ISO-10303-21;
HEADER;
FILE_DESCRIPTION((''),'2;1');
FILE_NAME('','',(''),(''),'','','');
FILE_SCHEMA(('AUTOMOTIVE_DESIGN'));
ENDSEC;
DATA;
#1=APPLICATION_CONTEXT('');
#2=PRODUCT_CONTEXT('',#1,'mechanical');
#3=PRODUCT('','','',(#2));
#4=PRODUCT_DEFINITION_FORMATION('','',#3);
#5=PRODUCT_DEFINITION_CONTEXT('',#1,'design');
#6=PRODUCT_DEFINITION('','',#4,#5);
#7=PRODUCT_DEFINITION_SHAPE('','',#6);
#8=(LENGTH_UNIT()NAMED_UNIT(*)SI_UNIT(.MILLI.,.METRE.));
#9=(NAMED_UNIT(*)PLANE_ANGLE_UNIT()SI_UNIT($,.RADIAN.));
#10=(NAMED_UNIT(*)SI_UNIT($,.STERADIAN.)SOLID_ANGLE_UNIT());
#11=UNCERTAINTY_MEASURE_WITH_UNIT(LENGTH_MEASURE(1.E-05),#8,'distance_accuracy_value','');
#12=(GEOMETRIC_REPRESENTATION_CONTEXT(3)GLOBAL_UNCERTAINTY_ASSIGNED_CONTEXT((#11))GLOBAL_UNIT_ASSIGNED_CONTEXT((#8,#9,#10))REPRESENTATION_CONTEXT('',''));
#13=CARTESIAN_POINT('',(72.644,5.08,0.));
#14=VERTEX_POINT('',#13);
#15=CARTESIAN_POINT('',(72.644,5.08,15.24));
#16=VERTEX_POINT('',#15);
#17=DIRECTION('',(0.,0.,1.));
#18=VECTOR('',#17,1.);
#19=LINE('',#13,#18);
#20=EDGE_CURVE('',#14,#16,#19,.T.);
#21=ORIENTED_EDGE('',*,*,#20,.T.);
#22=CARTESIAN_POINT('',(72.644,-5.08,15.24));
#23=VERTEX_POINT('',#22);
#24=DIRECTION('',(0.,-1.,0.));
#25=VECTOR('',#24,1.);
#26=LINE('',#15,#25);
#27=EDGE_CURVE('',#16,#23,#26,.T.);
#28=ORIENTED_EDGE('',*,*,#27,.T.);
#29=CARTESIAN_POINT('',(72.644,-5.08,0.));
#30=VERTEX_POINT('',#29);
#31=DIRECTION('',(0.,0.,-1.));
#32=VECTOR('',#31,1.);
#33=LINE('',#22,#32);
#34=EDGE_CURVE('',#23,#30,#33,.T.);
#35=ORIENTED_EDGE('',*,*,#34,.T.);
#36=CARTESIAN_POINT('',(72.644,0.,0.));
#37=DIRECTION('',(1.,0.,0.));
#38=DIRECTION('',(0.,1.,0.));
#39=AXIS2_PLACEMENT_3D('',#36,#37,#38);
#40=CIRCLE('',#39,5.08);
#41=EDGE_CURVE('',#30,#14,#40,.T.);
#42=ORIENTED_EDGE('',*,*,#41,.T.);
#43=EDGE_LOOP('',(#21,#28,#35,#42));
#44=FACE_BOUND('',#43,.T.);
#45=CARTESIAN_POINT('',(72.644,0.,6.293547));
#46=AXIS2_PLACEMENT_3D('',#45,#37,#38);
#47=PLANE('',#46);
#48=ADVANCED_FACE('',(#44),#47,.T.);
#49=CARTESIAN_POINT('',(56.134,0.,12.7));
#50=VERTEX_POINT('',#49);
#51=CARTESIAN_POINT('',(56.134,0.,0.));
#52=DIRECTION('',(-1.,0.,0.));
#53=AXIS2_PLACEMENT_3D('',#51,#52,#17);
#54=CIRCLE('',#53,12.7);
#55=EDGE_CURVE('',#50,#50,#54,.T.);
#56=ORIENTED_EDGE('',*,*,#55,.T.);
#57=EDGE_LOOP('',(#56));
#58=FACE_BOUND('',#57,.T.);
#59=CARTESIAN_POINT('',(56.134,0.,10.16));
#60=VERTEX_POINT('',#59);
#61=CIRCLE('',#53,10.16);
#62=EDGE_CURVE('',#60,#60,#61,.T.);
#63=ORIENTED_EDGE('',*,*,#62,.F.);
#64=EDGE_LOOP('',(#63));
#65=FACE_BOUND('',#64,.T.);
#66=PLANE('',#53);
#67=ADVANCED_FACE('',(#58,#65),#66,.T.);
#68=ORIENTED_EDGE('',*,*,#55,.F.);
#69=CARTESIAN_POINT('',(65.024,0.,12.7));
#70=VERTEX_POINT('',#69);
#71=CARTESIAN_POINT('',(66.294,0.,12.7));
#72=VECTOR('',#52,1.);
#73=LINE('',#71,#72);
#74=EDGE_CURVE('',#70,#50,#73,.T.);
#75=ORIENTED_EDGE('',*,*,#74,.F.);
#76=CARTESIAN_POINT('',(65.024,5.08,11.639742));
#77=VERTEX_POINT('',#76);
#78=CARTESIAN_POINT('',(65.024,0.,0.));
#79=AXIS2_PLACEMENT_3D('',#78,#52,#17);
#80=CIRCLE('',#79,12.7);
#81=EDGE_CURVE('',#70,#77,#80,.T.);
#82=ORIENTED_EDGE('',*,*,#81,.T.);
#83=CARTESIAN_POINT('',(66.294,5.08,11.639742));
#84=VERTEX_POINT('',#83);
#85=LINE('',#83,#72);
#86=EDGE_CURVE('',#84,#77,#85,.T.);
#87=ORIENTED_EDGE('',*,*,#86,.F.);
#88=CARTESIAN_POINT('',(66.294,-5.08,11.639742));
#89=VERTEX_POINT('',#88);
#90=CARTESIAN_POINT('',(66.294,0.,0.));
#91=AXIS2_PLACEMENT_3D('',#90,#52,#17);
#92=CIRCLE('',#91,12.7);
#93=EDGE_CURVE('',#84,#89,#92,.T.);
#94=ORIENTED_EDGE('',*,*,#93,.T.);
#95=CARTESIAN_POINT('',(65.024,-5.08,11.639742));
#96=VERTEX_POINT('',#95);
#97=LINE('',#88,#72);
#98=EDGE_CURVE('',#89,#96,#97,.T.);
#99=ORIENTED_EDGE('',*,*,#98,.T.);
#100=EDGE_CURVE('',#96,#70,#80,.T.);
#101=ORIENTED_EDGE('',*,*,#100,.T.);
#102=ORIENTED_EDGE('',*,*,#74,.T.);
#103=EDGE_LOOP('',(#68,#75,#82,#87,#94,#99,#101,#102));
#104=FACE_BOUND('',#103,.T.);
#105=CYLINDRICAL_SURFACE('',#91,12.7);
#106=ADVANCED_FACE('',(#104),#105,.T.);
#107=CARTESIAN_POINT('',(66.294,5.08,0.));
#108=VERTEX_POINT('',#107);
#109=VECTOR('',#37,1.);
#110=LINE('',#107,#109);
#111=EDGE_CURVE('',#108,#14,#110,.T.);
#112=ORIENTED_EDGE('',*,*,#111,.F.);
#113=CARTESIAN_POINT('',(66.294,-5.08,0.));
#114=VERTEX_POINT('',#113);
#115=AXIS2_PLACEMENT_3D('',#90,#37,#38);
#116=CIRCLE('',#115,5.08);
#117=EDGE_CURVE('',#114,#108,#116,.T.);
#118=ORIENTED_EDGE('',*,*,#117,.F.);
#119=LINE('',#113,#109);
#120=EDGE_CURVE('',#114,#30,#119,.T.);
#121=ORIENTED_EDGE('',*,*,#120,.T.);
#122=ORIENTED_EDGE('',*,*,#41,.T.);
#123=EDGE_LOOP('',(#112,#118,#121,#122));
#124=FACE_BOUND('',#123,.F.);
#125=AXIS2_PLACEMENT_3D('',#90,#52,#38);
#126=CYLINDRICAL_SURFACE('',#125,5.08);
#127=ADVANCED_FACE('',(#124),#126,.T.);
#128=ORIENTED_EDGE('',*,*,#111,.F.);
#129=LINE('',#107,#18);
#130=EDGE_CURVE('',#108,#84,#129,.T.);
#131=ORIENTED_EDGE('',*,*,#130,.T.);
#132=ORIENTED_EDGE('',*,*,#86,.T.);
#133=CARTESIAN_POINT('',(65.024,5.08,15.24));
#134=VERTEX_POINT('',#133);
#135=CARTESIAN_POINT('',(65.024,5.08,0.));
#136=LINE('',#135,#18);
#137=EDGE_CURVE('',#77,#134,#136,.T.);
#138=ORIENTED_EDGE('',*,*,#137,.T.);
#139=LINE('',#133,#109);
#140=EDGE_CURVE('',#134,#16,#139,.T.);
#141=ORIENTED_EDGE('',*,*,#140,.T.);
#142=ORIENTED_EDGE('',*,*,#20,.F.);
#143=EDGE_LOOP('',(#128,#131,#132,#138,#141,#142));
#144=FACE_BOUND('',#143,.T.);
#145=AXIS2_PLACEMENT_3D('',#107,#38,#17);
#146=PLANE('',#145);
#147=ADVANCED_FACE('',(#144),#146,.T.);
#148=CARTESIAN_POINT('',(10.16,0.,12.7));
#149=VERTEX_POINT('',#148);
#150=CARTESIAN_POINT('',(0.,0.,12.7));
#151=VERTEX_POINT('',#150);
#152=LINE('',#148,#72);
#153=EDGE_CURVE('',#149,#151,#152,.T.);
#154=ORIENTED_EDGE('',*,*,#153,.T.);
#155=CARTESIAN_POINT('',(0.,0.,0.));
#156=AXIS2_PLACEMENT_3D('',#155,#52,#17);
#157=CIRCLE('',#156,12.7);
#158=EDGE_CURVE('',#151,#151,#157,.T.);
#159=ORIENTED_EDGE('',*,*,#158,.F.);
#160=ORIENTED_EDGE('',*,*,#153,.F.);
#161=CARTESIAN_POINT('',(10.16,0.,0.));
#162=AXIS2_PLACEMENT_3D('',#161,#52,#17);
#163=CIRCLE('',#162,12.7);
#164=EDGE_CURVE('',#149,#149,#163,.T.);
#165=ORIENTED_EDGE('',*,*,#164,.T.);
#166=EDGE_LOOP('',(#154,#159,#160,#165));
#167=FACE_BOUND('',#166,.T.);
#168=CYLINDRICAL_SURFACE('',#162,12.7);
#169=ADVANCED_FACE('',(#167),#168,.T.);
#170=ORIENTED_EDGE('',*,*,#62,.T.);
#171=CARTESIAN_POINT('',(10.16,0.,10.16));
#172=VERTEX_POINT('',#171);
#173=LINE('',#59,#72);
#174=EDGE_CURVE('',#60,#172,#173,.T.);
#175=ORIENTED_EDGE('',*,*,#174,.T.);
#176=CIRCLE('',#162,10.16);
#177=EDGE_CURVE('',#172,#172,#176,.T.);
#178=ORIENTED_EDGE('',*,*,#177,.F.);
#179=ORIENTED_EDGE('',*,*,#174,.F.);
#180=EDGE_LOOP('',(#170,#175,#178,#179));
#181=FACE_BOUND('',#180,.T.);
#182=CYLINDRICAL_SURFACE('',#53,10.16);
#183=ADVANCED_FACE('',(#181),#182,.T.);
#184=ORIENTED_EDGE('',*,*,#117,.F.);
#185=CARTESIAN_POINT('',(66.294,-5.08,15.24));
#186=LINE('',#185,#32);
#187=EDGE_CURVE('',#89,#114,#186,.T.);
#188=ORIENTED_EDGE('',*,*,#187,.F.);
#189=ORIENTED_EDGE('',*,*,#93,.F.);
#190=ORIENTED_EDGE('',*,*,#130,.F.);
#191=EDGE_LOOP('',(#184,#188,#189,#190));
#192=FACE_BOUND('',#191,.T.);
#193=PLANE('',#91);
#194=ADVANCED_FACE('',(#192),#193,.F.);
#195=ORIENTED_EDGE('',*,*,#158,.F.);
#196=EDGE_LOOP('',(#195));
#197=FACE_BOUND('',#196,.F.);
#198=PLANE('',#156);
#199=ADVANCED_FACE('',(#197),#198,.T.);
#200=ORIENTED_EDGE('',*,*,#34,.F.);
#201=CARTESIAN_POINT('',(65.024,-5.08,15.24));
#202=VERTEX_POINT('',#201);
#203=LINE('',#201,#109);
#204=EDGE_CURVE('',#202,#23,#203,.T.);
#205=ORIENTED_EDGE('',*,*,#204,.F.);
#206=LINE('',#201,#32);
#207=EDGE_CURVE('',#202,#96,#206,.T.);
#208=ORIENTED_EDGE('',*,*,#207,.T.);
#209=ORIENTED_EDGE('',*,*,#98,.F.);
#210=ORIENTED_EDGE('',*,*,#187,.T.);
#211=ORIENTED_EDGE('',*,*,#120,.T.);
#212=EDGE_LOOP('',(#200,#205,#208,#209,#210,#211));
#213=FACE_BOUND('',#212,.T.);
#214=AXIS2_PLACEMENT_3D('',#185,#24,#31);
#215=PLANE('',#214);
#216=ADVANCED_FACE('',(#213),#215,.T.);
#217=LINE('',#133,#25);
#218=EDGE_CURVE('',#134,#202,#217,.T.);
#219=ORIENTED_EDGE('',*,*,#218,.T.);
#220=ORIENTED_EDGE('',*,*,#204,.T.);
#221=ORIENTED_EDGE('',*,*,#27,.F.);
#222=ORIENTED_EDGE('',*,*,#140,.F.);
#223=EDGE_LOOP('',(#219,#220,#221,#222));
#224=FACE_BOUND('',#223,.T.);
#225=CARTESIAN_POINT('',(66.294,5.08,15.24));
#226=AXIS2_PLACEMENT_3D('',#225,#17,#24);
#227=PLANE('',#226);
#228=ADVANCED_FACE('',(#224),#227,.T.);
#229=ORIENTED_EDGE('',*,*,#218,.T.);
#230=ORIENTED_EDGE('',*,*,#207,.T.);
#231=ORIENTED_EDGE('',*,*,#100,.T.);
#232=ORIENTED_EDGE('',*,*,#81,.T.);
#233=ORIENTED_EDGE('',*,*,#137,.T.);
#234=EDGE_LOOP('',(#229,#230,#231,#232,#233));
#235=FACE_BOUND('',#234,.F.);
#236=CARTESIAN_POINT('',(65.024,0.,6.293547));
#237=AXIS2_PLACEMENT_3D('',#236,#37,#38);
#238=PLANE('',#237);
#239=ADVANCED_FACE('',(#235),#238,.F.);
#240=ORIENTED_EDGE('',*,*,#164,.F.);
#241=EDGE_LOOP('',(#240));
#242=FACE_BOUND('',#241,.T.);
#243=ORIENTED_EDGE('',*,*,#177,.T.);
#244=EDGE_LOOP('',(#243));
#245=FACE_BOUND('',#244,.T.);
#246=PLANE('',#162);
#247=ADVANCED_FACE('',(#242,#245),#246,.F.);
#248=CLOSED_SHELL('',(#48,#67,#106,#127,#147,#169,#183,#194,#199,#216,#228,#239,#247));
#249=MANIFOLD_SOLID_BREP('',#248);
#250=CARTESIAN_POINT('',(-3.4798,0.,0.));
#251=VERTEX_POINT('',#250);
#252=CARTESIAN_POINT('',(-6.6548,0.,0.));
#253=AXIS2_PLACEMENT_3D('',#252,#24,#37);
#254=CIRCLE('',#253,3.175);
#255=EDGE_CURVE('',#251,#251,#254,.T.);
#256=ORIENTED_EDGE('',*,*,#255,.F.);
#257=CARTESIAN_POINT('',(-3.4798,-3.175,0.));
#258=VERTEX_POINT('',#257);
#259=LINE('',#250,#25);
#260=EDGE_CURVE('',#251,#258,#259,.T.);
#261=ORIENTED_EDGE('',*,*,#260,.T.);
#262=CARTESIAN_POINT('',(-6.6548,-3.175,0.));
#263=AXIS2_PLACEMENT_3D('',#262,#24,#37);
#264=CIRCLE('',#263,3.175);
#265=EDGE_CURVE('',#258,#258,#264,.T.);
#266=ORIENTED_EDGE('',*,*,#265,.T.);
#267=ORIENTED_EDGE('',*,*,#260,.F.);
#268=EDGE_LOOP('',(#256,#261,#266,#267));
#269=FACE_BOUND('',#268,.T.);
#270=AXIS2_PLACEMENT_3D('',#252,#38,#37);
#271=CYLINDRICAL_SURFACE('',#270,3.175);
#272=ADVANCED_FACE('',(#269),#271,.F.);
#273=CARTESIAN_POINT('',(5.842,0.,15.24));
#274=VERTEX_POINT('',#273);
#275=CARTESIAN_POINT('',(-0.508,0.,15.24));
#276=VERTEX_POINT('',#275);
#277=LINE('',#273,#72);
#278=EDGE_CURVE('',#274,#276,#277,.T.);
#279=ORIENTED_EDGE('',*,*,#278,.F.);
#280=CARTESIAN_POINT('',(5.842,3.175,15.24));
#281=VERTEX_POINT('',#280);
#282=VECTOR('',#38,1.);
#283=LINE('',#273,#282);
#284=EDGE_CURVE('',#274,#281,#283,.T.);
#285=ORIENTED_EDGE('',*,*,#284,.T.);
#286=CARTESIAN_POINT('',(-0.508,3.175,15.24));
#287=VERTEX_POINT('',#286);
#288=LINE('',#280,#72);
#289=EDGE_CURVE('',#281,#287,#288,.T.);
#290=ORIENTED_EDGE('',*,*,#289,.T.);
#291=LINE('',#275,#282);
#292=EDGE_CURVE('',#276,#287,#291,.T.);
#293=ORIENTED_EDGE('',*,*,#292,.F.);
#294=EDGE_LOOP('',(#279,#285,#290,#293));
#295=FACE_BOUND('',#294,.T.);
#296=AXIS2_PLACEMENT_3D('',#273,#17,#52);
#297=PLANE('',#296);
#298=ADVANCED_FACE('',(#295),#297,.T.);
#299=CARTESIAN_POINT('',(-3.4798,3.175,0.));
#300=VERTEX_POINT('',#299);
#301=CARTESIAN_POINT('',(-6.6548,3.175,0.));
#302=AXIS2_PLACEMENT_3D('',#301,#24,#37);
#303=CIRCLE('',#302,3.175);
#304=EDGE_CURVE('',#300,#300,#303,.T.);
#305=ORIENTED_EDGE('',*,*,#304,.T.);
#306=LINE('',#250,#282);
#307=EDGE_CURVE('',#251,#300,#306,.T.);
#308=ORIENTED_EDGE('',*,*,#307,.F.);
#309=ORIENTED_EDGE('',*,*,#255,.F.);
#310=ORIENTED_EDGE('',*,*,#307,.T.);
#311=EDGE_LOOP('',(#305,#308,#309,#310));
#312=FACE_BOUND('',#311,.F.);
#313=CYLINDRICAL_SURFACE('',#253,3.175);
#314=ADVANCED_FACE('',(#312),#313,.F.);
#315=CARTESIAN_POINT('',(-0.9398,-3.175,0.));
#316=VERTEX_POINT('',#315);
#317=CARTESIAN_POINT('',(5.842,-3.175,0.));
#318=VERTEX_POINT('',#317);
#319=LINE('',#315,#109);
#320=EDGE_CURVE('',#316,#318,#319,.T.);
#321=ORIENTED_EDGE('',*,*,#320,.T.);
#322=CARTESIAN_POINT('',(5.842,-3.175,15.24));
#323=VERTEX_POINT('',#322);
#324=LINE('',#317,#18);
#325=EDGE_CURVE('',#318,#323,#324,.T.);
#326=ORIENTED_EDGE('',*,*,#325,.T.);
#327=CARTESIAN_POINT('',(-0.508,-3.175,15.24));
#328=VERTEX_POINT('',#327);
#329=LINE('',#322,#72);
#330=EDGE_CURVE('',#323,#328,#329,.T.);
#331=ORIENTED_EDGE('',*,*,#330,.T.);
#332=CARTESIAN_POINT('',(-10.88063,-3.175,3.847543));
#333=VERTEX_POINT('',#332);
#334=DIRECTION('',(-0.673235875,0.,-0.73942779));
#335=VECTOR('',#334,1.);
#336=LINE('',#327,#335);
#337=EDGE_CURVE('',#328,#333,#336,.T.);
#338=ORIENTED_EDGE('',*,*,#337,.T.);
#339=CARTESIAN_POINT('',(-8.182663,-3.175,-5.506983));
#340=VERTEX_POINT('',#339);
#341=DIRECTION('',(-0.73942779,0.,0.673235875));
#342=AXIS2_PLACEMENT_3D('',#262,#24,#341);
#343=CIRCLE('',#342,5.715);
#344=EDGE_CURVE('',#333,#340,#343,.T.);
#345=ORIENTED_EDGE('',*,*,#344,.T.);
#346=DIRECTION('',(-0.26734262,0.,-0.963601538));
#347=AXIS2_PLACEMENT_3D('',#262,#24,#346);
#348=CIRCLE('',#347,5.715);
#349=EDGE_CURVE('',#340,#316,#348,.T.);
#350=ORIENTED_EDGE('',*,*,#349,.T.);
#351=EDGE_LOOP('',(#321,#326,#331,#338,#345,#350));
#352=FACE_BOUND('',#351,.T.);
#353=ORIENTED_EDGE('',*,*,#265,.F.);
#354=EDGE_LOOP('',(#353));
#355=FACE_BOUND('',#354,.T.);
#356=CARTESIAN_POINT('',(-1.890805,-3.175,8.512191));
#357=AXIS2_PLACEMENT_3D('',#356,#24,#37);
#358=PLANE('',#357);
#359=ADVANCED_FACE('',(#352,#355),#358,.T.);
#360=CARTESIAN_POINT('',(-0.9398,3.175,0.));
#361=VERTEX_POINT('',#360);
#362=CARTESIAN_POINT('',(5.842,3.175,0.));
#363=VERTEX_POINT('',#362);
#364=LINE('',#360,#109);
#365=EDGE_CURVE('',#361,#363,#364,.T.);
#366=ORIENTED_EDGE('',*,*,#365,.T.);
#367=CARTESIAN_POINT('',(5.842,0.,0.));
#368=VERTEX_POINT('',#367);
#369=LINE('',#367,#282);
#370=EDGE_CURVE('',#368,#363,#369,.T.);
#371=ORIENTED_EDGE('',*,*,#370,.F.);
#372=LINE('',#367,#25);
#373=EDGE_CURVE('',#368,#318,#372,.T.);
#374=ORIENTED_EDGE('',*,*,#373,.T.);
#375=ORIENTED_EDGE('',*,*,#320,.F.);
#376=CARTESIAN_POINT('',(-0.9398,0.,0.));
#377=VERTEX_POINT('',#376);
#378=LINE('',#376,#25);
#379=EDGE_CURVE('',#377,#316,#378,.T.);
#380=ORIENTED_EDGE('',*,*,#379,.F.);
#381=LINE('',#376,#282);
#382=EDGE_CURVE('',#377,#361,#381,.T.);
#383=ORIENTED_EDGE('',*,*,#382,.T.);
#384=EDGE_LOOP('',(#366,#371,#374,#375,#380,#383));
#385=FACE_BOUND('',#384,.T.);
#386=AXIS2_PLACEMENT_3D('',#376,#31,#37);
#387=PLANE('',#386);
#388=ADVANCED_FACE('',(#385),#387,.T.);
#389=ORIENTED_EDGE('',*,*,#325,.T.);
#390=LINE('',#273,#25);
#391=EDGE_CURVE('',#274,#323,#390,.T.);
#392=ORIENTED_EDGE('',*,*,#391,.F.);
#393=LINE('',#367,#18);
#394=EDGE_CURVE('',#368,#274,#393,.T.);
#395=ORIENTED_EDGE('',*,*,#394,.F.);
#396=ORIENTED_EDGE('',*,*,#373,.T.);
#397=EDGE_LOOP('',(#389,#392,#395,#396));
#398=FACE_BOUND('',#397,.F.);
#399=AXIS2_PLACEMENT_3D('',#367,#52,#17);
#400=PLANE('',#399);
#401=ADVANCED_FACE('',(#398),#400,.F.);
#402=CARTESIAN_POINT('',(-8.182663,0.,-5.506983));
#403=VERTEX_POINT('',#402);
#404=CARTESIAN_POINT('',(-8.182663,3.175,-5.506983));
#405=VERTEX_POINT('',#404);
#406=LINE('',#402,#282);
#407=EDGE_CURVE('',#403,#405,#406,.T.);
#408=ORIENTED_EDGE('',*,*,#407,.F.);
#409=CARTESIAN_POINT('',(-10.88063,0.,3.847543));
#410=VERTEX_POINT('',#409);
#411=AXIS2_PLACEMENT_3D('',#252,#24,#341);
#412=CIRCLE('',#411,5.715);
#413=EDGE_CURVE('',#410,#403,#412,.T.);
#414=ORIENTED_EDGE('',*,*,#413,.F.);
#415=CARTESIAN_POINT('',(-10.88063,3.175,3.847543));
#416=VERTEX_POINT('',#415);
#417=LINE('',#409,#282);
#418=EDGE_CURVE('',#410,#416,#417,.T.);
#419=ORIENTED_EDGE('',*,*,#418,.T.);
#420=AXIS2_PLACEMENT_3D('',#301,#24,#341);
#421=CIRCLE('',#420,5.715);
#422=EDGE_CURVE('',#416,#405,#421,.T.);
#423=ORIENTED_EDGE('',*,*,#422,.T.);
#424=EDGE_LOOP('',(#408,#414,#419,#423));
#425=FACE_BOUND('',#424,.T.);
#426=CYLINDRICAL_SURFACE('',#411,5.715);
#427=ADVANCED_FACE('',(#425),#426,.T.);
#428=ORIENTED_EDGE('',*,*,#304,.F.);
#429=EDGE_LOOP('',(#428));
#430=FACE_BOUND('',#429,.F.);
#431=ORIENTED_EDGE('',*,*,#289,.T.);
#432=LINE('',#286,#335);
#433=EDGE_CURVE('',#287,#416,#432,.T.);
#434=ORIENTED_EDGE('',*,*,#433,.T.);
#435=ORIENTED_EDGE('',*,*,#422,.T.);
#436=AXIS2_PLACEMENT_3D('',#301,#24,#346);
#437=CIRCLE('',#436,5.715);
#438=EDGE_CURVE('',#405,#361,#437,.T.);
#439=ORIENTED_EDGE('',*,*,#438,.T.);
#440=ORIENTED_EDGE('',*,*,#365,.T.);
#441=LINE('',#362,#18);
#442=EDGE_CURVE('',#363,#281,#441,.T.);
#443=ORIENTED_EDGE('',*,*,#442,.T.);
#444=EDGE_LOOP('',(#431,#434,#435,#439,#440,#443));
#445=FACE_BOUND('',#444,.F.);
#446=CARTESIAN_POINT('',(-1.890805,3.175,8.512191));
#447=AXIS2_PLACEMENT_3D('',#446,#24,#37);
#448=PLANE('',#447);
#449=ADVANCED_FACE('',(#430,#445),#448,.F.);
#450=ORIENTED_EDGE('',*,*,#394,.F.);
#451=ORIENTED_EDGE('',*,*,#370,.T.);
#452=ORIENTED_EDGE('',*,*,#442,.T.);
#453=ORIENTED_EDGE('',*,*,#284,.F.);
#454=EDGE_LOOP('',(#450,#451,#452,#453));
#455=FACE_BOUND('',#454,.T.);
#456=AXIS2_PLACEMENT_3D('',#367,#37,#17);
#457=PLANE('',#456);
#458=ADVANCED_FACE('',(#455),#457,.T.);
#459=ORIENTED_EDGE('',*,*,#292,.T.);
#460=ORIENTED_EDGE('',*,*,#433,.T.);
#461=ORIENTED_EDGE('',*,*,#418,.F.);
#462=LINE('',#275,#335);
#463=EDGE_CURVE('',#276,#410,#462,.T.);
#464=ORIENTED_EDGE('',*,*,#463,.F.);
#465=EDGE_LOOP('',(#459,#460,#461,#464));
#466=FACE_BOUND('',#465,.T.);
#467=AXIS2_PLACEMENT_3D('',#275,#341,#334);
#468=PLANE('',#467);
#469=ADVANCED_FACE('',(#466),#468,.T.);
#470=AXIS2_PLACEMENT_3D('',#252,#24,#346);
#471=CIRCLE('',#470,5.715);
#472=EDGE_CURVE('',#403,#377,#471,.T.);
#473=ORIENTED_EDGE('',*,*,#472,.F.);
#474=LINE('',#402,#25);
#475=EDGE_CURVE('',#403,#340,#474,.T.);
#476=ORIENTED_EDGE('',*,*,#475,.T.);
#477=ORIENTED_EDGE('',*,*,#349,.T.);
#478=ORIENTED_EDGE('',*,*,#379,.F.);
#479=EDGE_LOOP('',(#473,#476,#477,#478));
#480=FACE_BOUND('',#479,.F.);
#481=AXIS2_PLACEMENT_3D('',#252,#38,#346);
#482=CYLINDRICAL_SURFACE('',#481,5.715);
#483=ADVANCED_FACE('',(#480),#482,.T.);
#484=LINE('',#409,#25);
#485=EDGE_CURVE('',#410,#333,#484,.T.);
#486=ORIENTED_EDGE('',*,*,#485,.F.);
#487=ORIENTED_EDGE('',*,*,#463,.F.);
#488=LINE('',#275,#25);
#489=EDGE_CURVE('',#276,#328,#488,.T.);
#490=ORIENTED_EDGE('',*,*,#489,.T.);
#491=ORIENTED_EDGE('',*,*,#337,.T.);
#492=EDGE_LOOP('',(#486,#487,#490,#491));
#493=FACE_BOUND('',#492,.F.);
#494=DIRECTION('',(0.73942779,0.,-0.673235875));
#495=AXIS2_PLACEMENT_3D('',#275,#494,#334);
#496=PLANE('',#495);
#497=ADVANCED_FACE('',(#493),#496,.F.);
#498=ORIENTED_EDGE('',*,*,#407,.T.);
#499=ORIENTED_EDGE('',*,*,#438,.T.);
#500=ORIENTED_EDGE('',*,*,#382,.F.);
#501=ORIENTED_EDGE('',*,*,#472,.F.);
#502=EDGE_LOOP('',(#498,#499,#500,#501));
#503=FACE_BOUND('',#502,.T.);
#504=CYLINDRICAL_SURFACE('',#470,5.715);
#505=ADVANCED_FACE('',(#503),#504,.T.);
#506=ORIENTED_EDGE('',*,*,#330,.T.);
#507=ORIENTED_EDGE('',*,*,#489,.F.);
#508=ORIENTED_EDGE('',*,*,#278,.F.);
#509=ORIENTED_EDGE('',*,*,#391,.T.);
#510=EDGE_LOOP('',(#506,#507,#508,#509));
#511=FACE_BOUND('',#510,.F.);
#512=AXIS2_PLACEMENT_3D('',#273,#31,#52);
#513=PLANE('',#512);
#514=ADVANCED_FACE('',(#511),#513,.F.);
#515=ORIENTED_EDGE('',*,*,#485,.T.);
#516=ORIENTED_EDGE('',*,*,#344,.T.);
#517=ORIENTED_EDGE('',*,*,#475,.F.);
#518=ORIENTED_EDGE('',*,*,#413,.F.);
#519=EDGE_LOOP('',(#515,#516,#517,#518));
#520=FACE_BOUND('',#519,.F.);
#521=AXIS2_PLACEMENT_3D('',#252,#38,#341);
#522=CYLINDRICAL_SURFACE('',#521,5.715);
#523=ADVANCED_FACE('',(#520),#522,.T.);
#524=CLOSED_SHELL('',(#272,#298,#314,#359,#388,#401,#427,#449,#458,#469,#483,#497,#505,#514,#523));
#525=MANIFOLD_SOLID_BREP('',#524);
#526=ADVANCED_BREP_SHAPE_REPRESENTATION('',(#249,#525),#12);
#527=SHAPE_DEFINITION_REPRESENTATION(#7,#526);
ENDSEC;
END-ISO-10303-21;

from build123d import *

# Parameters (mm, degrees)
F0_W          = 5.842
F0_H          = 12.7
F2_R          = 1.524
F3_DEPTH      = 6.35
F3_DEPTH_BACK = 1.27
F0_R          = 3.175
F5_DEPTH      = 3.175


# Not quite as in the source:
# - the program builds the solid bodies; features that only make, move or delete a surface that nothing else refers to are left out


with BuildPart() as f1:
    # F0 (on Front) → F1 (revolve)
    with BuildSketch(Plane.XZ):
        with Locations((2.921, 6.35)):
            Rectangle(F0_W, F0_H)
        Polygon((5.842, 12.7), (5.842, 0), (66.294, 0), (66.294, 12.7), (56.134, 12.7), (56.134, 10.16), (10.16, 10.16), (10.16, 12.7), align=None)
    revolve(axis=Axis((33.147, 0, 0), (-1, 0, 0)))

    # F2 (on face) → F3 (join, two sides)
    with BuildSketch(Plane.YZ.offset(66.294)) as f3_sk:
        with BuildLine():
            ThreePointArc((-5.08, 0), (0, 5.08), (5.08, 0))
            Line((5.08, 0), (5.08, 11.6397422652))
            ThreePointArc((5.08, 11.6397422652), (0, 12.7), (-5.08, 11.6397422652))
            Line((-5.08, 11.6397422652), (-5.08, 0))
        make_face()
        with BuildLine():
            ThreePointArc((-5.08, 11.6397422652), (0, 12.7), (5.08, 11.6397422652))
            Line((5.08, 11.6397422652), (5.08, 15.24))
            Line((5.08, 15.24), (-5.08, 15.24))
            Line((-5.08, 15.24), (-5.08, 11.6397422652))
        make_face()
        with BuildLine():
            ThreePointArc((-5.08, 0), (0, -5.08), (5.08, 0))
            ThreePointArc((5.08, 0), (0, 5.08), (-5.08, 0))
        make_face()
        Circle(F2_R, mode=Mode.SUBTRACT)
        Circle(F2_R)
    extrude(amount=F3_DEPTH)
    extrude(f3_sk.sketch, amount=-F3_DEPTH_BACK)


with BuildPart() as f5:
    # F0 (on Front) → F5 (new body, symmetric)
    with BuildSketch(Plane.XZ):
        with BuildLine():
            Line((-0.9398, 0), (0, 0))
            Line((0, 0), (0, 12.7))
            Line((0, 12.7), (5.842, 12.7))
            Line((5.842, 12.7), (5.842, 15.24))
            Line((5.842, 15.24), (-0.508, 15.24))
            Line((-0.508, 15.24), (-10.8806298187, 3.8475430269))
            ThreePointArc((-10.8806298187, 3.8475430269), (-4.5919612295, 5.3297205562), (-0.9398, 0))
        make_face()
        with BuildLine():
            ThreePointArc((-8.1826630726, -5.5069827884), (-3.1957909266, -4.5493385486), (-0.9398, 0))
            ThreePointArc((-0.9398, 0), (-4.5919612295, 5.3297205562), (-10.8806298187, 3.8475430269))
            ThreePointArc((-10.8806298187, 3.8475430269), (-12.1459778134, -1.5837270034), (-8.1826630726, -5.5069827884))
        make_face()
        with Locations((-6.6548, 0)):
            Circle(F0_R, mode=Mode.SUBTRACT)
        with Locations((2.921, 6.35)):
            Rectangle(F0_W, F0_H)
    extrude(amount=F5_DEPTH, both=True)


solid = Compound([f1.part, f5.part])
